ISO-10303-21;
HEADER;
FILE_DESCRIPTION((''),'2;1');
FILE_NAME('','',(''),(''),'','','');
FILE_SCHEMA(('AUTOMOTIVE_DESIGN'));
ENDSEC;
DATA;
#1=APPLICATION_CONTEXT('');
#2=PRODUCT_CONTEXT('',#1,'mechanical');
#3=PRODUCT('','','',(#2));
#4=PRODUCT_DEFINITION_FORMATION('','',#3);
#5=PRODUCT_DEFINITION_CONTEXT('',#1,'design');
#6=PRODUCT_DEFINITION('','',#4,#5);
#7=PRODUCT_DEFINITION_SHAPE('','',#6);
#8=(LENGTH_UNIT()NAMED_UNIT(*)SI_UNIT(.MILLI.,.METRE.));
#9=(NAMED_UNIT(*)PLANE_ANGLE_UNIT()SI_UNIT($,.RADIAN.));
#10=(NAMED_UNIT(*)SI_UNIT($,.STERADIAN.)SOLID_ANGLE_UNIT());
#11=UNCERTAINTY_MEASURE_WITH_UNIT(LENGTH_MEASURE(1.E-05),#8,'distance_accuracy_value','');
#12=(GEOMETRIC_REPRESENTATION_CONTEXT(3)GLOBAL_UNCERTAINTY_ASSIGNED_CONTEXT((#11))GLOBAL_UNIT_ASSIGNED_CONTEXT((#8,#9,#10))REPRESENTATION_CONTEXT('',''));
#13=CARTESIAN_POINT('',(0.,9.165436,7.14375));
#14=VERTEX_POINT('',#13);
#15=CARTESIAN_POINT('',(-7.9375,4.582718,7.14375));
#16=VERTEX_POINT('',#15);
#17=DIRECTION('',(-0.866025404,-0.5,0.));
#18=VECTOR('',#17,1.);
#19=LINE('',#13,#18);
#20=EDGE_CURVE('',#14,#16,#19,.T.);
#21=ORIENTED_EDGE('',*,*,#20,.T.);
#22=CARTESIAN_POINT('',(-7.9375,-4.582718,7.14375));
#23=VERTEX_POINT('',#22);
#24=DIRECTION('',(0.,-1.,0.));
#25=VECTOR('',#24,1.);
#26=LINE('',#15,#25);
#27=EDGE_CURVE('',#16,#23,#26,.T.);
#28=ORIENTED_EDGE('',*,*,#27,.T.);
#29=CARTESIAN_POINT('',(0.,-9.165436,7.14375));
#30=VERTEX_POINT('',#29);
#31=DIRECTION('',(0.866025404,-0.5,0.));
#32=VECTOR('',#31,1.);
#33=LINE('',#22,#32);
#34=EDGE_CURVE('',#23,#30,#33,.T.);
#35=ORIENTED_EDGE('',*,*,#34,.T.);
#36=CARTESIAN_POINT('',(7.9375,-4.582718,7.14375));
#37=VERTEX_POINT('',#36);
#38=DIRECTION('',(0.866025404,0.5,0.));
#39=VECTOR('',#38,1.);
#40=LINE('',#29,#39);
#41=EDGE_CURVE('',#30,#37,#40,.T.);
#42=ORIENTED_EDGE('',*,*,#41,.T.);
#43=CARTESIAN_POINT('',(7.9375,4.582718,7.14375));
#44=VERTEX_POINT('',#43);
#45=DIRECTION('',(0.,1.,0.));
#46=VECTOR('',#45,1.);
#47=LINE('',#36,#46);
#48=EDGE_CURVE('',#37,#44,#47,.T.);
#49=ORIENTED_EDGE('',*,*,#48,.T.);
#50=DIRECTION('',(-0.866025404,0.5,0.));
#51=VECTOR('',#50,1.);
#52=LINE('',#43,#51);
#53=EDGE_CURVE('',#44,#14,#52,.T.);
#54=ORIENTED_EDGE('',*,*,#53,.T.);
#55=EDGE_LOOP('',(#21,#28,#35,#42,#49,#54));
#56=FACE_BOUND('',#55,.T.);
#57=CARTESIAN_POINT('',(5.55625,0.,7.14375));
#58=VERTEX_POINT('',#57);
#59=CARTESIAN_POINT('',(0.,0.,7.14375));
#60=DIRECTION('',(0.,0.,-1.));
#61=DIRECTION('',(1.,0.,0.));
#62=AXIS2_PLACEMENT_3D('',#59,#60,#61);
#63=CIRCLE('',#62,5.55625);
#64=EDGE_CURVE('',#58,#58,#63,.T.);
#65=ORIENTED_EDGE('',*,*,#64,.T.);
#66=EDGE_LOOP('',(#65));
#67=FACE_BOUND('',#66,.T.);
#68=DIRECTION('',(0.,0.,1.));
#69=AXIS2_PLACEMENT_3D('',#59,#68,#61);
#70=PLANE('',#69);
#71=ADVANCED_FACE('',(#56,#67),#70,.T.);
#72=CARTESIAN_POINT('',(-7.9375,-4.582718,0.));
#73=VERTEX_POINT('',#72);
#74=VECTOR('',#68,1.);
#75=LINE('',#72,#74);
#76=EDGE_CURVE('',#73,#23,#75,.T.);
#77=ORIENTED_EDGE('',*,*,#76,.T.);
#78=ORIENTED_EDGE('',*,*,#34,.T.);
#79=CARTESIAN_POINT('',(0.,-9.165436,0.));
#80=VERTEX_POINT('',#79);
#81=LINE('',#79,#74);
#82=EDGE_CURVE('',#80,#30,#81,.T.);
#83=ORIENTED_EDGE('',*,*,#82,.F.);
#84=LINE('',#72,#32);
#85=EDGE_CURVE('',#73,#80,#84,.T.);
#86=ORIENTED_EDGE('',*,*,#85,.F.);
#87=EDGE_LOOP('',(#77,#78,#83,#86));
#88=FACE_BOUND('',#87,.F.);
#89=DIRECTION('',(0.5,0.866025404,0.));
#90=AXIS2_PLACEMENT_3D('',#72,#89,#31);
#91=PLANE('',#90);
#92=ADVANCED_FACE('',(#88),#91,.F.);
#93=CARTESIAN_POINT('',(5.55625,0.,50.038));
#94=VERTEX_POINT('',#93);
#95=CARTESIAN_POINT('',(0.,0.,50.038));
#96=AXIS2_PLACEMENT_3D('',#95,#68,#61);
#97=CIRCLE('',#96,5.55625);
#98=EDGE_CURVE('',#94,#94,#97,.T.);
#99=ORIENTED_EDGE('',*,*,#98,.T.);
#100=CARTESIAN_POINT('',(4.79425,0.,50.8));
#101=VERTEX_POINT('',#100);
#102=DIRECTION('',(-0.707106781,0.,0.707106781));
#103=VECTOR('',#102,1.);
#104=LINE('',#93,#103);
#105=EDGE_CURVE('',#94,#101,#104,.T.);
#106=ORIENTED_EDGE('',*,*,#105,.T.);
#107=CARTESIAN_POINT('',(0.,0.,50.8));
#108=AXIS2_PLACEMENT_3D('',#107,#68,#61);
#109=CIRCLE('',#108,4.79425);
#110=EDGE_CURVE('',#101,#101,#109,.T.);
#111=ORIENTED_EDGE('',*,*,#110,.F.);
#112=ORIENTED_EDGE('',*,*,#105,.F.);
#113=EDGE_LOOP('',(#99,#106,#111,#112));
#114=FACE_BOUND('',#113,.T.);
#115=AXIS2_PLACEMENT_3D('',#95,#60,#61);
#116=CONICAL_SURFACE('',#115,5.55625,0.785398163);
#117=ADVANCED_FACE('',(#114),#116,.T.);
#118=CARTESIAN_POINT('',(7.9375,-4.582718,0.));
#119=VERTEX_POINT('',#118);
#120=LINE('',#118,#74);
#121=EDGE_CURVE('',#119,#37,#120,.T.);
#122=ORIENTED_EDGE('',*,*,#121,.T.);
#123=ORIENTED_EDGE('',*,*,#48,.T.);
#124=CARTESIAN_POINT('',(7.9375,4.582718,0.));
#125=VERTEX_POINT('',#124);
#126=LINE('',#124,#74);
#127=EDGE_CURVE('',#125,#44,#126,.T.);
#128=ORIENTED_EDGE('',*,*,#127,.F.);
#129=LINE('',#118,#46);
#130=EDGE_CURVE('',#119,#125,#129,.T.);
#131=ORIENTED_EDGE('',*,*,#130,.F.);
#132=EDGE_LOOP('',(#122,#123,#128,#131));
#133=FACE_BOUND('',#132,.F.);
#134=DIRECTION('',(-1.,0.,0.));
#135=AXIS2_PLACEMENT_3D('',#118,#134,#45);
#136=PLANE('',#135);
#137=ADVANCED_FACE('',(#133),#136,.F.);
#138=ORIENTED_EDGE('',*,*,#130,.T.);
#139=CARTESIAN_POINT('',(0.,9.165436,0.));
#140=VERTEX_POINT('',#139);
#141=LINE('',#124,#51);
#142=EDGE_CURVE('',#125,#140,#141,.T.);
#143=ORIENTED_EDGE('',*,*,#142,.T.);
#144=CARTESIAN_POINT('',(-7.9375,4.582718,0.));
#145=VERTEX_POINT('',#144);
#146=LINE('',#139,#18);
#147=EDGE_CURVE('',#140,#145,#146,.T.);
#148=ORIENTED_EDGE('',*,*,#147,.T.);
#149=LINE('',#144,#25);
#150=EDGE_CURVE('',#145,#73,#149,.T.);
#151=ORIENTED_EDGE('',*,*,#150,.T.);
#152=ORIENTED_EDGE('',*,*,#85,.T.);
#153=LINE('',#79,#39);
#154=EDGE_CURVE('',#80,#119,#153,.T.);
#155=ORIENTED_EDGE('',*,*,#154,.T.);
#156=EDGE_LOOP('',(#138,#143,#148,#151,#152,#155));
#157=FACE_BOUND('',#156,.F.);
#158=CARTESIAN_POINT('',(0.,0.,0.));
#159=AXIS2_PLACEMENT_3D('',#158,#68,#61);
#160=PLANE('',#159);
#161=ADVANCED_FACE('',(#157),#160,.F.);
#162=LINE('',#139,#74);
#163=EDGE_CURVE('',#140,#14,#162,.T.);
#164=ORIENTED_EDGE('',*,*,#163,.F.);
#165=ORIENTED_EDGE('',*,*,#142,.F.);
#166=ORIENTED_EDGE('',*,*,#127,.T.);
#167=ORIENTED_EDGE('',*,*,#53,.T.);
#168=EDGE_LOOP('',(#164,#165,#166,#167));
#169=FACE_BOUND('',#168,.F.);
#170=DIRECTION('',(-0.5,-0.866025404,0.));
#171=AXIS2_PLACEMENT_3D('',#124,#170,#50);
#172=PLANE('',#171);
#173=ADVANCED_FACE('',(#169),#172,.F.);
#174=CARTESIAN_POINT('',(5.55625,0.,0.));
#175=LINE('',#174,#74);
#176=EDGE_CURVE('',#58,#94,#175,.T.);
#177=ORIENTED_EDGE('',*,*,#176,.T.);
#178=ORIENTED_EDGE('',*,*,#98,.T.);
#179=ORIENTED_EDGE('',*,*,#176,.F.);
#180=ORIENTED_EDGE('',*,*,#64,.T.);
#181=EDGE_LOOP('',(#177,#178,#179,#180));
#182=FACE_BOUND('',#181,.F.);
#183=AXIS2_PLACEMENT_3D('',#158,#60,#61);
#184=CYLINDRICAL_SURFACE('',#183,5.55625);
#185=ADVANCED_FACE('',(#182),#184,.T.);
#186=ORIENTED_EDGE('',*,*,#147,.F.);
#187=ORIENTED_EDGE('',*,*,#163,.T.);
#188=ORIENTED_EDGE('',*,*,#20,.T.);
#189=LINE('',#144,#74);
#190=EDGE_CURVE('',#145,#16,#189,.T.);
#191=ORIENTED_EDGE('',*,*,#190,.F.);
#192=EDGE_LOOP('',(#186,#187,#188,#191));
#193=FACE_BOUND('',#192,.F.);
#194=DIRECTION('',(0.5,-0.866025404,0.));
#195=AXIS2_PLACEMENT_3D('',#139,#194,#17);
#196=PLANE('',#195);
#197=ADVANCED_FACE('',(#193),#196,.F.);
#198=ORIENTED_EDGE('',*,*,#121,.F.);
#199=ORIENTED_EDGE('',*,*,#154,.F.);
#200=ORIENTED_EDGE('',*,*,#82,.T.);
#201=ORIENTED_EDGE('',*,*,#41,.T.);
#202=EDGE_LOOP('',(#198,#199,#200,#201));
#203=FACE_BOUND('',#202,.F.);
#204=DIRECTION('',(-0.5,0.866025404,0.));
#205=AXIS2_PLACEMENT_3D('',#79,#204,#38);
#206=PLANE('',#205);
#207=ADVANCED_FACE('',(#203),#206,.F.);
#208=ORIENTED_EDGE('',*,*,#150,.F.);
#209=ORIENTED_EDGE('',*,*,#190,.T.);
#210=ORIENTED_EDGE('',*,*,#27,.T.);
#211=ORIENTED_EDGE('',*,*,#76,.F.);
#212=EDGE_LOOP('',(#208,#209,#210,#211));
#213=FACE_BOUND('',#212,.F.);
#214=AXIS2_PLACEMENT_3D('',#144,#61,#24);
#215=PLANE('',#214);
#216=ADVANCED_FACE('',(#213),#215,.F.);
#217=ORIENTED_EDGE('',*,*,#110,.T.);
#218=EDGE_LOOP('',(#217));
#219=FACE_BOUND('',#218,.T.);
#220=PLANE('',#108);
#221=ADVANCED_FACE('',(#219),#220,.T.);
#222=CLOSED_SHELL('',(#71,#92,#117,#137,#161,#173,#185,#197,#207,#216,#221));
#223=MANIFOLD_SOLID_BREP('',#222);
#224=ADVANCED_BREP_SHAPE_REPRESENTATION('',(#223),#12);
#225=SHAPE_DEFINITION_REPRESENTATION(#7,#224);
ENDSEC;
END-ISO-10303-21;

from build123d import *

# Parameters (mm, degrees)
F2_DEPTH = 7.14375
F0_R     = 5.55625
F3_DEPTH = 50.8
F5_SIZE  = 0.762


# Not quite as in the source:
# - a length typed as a fraction of an inch, garbled in the dataset ("3 / 203.2 mm" for 3/8 in), is restored


with BuildPart() as f2:
    # F1 (on Top) → F2 (new body)
    with BuildSketch(Plane.XY):
        Polygon((7.9375, 4.5827177617), (0, 9.1654355234), (-7.9375, 4.5827177617), (-7.9375, -4.5827177617), (0, -9.1654355234), (7.9375, -4.5827177617), align=None)
    extrude(amount=F2_DEPTH)

    # F0 (on Top) → F3 (join)
    with BuildSketch(Plane.XY):
        Circle(F0_R)
    extrude(amount=F3_DEPTH)

    # F5
    f5_edges = [f2.edges().sort_by_distance(p)[0] for p in [
        (-5.55625, 0, 50.8),
    ]]
    chamfer(f5_edges, length=F5_SIZE)


solid = f2.part
